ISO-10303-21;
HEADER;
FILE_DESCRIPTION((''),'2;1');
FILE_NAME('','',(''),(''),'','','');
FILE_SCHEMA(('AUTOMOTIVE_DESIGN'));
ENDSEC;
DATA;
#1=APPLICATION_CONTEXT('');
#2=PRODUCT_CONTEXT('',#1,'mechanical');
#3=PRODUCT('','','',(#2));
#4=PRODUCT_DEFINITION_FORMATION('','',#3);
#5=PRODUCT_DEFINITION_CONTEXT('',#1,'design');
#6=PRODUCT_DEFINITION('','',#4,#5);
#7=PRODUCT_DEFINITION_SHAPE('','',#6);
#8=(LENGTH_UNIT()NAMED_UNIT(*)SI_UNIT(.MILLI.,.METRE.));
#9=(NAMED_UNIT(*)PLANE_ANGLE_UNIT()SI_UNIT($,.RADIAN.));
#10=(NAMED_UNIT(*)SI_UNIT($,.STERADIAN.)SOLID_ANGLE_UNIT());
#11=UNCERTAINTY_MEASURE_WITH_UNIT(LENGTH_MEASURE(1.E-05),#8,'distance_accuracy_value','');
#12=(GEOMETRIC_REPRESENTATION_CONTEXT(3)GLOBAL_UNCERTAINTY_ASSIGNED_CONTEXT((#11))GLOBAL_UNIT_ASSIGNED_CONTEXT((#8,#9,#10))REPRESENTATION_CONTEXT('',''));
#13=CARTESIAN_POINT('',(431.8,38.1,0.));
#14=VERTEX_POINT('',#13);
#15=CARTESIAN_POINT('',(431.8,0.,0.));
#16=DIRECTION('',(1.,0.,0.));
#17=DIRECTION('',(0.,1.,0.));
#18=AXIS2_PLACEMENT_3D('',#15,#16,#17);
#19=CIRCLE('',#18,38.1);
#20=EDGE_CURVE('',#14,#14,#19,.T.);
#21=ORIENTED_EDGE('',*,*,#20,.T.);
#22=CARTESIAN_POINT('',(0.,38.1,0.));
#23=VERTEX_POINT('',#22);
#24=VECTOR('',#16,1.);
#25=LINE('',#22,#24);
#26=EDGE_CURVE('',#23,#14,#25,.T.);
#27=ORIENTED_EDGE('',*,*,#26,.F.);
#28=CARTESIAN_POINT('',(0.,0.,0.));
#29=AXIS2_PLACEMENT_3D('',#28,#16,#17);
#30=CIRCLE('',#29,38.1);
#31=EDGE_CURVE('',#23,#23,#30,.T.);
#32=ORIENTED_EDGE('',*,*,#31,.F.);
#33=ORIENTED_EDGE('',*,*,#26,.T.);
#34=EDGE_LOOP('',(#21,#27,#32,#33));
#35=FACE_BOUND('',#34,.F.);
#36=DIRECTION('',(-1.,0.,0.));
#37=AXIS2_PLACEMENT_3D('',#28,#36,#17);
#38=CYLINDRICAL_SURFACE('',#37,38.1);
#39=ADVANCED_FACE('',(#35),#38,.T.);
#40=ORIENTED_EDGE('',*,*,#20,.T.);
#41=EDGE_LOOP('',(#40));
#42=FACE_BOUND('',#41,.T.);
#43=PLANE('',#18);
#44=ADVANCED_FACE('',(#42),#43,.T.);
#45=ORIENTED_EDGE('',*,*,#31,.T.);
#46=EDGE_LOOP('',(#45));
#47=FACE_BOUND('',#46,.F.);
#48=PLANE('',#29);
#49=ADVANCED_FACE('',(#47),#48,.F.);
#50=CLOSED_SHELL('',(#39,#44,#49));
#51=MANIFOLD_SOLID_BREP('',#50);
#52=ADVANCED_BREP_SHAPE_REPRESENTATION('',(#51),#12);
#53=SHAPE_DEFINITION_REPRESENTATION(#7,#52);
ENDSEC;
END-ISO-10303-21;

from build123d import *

# Parameters (mm, degrees)
F0_R     = 38.1
F2_DEPTH = 431.8


# Not quite as in the source:
# - the program builds the solid bodies; features that only make, move or delete a surface that nothing else refers to are left out


with BuildPart() as f2:
    # F0 (on Right) → F2 (new body)
    with BuildSketch(Plane.YZ):
        Circle(F0_R)
    extrude(amount=F2_DEPTH)


solid = f2.part
